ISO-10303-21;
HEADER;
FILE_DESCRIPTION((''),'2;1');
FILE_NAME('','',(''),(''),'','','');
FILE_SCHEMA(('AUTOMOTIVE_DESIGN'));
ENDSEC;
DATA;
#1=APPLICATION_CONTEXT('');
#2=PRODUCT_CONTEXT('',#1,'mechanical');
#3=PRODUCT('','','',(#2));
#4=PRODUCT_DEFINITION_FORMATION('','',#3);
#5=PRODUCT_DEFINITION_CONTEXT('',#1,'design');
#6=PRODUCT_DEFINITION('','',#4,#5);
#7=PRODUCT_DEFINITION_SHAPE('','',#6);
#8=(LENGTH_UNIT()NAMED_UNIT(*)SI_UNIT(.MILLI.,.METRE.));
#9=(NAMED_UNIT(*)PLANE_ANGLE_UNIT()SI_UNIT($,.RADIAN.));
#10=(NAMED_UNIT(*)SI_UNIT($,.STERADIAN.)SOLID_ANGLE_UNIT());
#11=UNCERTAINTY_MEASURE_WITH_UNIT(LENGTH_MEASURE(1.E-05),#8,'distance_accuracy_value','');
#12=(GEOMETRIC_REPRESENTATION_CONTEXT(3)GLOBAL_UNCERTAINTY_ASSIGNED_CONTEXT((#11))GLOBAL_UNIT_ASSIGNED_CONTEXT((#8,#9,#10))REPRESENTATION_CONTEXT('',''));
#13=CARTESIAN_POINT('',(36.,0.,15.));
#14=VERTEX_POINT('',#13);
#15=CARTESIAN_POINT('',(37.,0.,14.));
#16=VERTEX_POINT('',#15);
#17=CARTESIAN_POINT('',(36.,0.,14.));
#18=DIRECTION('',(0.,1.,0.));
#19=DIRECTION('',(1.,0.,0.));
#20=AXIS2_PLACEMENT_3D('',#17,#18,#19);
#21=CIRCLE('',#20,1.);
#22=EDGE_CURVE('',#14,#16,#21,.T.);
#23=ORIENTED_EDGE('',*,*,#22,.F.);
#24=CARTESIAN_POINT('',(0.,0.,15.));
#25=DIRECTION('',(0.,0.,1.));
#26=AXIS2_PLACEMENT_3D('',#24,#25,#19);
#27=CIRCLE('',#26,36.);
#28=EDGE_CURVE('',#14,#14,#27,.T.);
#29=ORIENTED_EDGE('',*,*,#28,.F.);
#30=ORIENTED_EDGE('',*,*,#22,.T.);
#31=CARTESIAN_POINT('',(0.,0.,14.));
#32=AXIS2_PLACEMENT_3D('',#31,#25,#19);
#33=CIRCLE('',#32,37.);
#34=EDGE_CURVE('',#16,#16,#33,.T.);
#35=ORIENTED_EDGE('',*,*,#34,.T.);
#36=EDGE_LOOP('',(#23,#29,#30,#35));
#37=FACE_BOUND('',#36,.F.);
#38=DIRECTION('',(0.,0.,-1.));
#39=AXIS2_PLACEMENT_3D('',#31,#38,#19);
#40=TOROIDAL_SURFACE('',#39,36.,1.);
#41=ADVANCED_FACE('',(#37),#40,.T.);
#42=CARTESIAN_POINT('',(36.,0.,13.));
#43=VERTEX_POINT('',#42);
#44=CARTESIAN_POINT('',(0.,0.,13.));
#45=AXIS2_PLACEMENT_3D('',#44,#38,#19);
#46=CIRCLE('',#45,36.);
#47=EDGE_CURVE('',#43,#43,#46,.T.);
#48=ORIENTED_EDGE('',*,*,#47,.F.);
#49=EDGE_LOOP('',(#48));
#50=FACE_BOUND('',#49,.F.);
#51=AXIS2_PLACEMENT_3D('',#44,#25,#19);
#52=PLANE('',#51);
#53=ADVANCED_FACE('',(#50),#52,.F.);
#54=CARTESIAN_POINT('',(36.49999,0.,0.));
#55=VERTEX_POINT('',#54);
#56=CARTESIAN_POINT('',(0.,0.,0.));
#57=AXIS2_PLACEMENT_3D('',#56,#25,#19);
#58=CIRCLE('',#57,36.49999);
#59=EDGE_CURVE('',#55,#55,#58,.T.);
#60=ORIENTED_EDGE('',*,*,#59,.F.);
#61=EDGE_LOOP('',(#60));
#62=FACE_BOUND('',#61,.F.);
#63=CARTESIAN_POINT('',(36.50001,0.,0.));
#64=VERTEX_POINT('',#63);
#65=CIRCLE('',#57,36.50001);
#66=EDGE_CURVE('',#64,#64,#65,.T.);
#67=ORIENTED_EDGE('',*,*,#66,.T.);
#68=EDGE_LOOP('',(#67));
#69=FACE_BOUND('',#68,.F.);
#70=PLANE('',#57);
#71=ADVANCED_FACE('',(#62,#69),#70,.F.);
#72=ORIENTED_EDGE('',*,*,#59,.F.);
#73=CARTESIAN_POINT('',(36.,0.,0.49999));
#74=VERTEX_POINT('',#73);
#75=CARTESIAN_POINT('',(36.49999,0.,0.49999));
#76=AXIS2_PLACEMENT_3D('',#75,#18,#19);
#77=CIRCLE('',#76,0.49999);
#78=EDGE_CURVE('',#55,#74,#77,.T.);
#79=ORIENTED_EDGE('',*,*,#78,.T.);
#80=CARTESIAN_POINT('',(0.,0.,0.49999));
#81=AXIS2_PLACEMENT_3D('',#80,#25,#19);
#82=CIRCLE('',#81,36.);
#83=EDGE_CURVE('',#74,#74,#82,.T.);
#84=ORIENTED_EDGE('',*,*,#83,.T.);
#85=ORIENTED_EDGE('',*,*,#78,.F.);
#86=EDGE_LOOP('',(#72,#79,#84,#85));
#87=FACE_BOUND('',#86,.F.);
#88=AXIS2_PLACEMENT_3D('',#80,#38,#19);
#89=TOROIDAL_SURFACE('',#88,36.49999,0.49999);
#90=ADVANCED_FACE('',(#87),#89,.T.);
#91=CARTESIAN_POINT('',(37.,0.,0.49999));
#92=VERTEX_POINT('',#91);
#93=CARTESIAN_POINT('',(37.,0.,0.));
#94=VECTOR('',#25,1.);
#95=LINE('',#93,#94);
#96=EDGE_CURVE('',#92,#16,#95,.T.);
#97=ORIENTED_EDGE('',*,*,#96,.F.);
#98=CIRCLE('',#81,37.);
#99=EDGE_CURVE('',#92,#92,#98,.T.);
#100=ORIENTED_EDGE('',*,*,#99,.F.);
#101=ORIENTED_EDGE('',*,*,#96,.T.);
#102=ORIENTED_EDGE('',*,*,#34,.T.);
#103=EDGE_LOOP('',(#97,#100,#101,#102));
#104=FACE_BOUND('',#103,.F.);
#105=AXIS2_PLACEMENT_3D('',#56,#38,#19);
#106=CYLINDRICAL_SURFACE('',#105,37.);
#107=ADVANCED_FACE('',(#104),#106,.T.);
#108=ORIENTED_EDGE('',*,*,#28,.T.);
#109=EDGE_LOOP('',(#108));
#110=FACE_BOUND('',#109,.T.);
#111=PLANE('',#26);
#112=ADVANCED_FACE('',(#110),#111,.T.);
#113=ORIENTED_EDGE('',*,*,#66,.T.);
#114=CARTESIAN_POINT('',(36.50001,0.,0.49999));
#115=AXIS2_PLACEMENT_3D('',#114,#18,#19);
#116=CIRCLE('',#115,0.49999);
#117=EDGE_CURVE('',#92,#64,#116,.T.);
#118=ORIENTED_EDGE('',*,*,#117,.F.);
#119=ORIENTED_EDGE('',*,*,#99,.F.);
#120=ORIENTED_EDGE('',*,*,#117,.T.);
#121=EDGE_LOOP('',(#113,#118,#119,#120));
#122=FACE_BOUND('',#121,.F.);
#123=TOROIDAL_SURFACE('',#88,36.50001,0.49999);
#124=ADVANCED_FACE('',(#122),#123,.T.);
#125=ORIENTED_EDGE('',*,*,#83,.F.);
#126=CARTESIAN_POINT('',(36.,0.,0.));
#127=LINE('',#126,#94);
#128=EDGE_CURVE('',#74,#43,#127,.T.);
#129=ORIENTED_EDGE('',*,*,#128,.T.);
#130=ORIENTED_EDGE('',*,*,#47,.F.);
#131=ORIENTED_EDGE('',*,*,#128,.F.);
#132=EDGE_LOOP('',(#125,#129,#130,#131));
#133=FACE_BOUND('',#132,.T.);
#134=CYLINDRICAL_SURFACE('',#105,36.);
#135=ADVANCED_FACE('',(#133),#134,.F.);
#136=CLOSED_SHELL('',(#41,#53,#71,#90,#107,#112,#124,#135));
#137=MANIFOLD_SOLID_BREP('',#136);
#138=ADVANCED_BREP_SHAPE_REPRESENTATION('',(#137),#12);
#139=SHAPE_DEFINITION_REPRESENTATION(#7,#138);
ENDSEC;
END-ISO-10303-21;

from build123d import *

# Parameters (mm, degrees)
F0_R     = 37
F0_R_2   = 36
F1_DEPTH = 15
F2_R     = 36.9218427358
F3_DEPTH = 2
F4_R     = 1
F5_R     = 0.49999


# Not quite as in the source:
# - a fillet or chamfer is up to 0.001 mm smaller than in the source, because OpenCascade refuses the exact size


with BuildPart() as f1:
    # F0 (on Top) → F1 (new body)
    with BuildSketch(Plane.XY):
        Circle(F0_R)
        Circle(F0_R_2, mode=Mode.SUBTRACT)
    extrude(amount=F1_DEPTH)

    # F2 (on face) → F3 (join)
    with BuildSketch(Plane.XY.offset(15)):
        Circle(F2_R)
    extrude(amount=-F3_DEPTH)

    # F4
    f4_edges = [f1.edges().sort_by_distance(p)[0] for p in [
        (-37, 0, 15),
    ]]
    fillet(f4_edges, radius=F4_R)

    # F5 (radius 0.5 in the source; OpenCascade refuses exactly that, so slightly less here)
    f5_edges = [f1.edges().sort_by_distance(p)[0] for p in [
        (-37, 0, 0),
        (-36, 0, 0),
    ]]
    fillet(f5_edges, radius=F5_R)


solid = f1.part
